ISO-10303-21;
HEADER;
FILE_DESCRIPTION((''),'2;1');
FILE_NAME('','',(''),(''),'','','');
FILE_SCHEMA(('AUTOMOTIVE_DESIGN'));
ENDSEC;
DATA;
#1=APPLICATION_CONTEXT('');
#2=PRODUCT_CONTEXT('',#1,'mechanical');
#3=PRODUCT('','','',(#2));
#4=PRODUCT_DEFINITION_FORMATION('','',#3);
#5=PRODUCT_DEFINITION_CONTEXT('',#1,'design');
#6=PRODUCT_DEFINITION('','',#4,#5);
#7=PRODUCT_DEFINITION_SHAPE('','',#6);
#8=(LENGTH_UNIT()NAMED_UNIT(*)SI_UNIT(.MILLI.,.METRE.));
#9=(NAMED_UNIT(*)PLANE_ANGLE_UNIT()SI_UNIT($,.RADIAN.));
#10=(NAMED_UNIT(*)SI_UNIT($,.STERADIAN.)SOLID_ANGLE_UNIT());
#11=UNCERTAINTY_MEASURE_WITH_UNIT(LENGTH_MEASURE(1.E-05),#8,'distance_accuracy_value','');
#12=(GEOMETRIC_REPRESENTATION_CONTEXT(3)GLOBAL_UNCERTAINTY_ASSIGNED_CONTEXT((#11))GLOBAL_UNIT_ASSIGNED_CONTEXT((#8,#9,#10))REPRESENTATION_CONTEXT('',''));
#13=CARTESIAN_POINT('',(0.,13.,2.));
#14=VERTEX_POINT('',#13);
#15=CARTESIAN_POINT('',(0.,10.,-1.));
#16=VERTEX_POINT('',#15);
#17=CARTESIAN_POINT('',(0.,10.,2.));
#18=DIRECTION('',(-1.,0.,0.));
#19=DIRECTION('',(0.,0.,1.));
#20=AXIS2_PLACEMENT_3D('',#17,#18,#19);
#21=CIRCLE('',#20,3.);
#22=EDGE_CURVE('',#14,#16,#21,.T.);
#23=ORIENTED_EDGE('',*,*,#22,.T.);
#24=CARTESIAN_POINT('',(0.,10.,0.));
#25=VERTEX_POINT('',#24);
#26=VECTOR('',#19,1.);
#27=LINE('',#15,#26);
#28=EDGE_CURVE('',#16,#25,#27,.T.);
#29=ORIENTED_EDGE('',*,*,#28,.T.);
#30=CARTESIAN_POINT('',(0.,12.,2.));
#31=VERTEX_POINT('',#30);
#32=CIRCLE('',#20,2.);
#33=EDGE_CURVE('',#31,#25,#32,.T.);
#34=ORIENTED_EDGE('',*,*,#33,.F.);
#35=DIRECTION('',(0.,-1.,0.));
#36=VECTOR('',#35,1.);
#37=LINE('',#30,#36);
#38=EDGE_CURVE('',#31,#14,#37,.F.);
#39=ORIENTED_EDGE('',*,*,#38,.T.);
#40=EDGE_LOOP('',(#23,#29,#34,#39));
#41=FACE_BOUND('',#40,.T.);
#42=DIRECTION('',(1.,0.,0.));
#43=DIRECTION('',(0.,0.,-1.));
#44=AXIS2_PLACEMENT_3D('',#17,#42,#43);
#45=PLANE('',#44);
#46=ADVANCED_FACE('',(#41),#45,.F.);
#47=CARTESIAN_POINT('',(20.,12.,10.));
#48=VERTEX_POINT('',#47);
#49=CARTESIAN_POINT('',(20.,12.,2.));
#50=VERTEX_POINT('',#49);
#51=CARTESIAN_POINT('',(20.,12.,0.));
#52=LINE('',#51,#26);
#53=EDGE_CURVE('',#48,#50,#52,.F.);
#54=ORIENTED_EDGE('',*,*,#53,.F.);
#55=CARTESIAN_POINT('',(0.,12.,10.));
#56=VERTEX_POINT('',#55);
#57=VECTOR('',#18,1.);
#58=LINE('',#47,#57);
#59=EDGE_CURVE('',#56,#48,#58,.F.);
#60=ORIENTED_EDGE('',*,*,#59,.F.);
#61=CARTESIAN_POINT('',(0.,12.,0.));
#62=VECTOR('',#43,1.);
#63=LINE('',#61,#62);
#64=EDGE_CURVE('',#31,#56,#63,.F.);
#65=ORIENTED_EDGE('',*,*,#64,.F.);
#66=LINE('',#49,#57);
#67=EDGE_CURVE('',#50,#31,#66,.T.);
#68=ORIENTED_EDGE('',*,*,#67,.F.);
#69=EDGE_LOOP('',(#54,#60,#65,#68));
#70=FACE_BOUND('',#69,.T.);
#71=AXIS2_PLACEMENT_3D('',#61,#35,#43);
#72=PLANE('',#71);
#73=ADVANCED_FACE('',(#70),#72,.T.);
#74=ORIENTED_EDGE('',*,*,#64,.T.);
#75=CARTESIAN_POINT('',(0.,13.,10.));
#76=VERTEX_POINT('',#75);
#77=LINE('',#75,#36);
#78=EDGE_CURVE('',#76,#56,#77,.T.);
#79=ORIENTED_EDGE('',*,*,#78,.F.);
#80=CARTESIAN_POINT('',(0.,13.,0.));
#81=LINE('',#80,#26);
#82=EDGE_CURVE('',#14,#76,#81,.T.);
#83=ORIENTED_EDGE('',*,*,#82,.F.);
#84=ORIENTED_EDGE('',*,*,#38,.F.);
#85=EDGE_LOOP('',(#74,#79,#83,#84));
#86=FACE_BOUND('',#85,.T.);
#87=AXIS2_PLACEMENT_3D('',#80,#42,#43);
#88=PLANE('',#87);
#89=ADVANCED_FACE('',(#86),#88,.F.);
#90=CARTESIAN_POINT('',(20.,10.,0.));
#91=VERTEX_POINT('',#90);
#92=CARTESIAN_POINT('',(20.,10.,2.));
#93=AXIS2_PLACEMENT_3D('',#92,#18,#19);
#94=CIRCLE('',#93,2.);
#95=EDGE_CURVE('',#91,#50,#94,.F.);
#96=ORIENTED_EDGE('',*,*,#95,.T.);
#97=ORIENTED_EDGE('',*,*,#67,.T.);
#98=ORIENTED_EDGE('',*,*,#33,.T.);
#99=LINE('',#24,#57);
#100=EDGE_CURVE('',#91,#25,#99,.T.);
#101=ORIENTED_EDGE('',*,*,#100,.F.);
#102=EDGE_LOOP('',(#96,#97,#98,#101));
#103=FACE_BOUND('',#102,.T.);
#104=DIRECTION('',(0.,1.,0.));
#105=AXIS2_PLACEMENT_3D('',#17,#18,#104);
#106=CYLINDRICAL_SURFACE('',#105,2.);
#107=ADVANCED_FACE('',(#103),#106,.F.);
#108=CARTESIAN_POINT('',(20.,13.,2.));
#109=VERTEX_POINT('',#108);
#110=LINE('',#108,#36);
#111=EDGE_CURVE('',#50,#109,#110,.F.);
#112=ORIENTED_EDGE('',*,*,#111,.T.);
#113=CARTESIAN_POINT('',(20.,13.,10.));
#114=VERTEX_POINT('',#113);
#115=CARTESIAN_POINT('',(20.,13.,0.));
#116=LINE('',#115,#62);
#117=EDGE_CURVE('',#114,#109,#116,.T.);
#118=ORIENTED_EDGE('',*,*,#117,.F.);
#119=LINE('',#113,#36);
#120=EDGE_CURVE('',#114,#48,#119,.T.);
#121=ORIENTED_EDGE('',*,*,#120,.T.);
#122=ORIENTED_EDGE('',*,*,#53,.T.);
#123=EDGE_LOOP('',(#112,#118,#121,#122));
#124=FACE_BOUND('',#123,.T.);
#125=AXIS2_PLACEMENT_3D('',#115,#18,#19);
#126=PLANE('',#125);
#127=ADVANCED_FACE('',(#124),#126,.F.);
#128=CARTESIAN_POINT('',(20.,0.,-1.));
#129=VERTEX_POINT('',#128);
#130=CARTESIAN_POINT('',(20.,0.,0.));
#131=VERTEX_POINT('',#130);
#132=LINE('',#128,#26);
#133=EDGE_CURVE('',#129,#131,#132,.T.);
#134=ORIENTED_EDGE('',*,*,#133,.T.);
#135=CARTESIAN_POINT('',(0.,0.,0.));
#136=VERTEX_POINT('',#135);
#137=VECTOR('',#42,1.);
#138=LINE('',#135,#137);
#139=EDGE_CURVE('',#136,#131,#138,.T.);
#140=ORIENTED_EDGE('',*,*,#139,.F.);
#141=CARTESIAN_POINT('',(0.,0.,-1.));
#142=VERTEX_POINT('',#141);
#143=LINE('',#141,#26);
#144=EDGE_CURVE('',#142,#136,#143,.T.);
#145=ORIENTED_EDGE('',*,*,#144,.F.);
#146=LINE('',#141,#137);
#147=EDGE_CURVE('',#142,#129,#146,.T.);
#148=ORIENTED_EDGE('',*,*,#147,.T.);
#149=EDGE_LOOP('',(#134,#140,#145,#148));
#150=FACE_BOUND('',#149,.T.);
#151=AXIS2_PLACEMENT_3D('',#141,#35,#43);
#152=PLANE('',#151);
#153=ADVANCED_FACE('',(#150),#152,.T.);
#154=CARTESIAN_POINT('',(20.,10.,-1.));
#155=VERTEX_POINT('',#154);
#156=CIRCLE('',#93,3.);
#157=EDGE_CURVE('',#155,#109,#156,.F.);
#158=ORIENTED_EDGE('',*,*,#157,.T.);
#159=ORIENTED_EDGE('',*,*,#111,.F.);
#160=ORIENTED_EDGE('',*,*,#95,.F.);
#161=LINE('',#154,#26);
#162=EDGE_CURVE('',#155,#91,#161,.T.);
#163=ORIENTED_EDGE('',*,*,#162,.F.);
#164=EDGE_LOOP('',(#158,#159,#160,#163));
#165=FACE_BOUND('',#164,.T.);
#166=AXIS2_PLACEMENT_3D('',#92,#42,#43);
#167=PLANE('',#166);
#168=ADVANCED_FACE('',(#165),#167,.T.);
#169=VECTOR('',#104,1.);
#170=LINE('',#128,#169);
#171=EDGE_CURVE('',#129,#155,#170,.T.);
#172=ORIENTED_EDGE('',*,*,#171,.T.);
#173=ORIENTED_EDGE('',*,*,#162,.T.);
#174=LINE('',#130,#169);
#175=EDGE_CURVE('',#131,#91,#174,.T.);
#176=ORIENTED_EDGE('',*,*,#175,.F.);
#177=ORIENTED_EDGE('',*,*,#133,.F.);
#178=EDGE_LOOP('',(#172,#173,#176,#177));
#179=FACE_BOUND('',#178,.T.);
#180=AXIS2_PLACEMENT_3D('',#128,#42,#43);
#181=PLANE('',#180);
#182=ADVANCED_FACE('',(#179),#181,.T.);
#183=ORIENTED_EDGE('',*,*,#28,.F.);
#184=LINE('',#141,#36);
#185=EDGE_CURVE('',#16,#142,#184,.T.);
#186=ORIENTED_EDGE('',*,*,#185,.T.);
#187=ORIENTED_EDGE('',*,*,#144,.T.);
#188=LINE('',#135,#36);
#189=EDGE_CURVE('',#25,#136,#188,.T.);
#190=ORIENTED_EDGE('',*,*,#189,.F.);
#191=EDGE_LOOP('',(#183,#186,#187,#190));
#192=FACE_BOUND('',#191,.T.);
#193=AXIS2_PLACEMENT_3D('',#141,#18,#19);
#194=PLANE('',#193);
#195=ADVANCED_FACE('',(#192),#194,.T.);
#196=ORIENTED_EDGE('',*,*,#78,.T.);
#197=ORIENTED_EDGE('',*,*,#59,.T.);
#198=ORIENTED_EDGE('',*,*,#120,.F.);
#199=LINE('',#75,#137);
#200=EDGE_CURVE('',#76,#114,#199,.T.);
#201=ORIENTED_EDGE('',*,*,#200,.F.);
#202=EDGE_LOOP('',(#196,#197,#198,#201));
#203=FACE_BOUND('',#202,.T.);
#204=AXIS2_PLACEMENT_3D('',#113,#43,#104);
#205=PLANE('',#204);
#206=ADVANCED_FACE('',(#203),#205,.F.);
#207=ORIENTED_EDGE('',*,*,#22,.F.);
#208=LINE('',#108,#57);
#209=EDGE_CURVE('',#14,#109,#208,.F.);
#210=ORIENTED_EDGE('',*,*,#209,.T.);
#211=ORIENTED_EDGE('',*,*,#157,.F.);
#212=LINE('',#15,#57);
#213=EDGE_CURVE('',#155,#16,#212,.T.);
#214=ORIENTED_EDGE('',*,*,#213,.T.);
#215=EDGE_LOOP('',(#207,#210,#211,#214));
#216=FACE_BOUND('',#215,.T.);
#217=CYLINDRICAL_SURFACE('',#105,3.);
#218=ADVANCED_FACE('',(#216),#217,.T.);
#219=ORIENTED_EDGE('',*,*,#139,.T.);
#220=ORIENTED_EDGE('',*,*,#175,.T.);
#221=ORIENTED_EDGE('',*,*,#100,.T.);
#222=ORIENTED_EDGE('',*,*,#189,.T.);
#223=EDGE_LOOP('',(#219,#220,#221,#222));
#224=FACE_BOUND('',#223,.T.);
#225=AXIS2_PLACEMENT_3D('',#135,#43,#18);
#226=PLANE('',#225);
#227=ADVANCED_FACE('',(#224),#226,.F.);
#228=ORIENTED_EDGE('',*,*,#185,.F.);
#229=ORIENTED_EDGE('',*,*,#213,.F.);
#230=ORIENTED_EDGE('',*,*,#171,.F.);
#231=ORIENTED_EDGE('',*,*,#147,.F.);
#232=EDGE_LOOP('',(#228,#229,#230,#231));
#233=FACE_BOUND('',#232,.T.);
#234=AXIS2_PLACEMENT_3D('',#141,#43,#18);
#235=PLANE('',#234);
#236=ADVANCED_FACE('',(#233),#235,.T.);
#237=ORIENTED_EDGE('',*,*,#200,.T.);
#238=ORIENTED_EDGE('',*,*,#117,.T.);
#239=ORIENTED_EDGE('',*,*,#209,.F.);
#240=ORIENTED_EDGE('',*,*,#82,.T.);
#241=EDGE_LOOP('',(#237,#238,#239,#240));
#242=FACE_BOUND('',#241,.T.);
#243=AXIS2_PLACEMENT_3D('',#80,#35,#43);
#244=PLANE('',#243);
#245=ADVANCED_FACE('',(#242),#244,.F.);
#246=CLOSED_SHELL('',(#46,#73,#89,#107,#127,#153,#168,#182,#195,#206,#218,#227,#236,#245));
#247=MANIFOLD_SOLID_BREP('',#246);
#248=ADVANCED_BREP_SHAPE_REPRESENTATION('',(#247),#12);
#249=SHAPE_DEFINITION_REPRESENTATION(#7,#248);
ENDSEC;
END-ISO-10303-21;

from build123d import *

# Parameters (mm, degrees)
SKETCH_1_W            = 20
SKETCH_1_H            = 10
BASEPLATE_DEPTH       = 1
EDGEFLANGE_DEPTH      = 20
EDGEFLANGE_START      = 1
EDGEFLANGE_FLAT_DEPTH = 1


# Sheet-metal steps are written as plain solids
with BuildPart() as part:
    # Sketch 1 → BasePlate (new body)
    with BuildSketch(Plane.XY):
        with Locations((10, 5)):
            Rectangle(SKETCH_1_W, SKETCH_1_H)
    extrude(amount=-BASEPLATE_DEPTH)

    # EdgeFlange bend section (across the edge) → EdgeFlange (add)
    with BuildSketch(Plane(origin=(20, 12, 0), x_dir=(0, -1, 0), z_dir=(-1, 0, 0))):
        with BuildLine():
            Line((-1, 2), (0, 2))
            ThreePointArc((0, 2), (0.585786438, 0.585786438), (2, 0))
            Line((2, 0), (2, -1))
            ThreePointArc((2, -1), (-0.121320344, -0.121320344), (-1, 2))
        make_face()
    extrude(amount=EDGEFLANGE_DEPTH)

    # EdgeFlange profile (on flange) → EdgeFlange flat (add)
    with BuildSketch(Plane(origin=(0, 12, 0), x_dir=(-1, 0, 0), z_dir=(0, 1, 0)).offset(EDGEFLANGE_START)):
        Polygon((-20, 10), (-20, 2), (0, 2), (0, 10), (-2, 10), (-18, 10), align=None)
    extrude(amount=-EDGEFLANGE_FLAT_DEPTH)


solid = part.part
